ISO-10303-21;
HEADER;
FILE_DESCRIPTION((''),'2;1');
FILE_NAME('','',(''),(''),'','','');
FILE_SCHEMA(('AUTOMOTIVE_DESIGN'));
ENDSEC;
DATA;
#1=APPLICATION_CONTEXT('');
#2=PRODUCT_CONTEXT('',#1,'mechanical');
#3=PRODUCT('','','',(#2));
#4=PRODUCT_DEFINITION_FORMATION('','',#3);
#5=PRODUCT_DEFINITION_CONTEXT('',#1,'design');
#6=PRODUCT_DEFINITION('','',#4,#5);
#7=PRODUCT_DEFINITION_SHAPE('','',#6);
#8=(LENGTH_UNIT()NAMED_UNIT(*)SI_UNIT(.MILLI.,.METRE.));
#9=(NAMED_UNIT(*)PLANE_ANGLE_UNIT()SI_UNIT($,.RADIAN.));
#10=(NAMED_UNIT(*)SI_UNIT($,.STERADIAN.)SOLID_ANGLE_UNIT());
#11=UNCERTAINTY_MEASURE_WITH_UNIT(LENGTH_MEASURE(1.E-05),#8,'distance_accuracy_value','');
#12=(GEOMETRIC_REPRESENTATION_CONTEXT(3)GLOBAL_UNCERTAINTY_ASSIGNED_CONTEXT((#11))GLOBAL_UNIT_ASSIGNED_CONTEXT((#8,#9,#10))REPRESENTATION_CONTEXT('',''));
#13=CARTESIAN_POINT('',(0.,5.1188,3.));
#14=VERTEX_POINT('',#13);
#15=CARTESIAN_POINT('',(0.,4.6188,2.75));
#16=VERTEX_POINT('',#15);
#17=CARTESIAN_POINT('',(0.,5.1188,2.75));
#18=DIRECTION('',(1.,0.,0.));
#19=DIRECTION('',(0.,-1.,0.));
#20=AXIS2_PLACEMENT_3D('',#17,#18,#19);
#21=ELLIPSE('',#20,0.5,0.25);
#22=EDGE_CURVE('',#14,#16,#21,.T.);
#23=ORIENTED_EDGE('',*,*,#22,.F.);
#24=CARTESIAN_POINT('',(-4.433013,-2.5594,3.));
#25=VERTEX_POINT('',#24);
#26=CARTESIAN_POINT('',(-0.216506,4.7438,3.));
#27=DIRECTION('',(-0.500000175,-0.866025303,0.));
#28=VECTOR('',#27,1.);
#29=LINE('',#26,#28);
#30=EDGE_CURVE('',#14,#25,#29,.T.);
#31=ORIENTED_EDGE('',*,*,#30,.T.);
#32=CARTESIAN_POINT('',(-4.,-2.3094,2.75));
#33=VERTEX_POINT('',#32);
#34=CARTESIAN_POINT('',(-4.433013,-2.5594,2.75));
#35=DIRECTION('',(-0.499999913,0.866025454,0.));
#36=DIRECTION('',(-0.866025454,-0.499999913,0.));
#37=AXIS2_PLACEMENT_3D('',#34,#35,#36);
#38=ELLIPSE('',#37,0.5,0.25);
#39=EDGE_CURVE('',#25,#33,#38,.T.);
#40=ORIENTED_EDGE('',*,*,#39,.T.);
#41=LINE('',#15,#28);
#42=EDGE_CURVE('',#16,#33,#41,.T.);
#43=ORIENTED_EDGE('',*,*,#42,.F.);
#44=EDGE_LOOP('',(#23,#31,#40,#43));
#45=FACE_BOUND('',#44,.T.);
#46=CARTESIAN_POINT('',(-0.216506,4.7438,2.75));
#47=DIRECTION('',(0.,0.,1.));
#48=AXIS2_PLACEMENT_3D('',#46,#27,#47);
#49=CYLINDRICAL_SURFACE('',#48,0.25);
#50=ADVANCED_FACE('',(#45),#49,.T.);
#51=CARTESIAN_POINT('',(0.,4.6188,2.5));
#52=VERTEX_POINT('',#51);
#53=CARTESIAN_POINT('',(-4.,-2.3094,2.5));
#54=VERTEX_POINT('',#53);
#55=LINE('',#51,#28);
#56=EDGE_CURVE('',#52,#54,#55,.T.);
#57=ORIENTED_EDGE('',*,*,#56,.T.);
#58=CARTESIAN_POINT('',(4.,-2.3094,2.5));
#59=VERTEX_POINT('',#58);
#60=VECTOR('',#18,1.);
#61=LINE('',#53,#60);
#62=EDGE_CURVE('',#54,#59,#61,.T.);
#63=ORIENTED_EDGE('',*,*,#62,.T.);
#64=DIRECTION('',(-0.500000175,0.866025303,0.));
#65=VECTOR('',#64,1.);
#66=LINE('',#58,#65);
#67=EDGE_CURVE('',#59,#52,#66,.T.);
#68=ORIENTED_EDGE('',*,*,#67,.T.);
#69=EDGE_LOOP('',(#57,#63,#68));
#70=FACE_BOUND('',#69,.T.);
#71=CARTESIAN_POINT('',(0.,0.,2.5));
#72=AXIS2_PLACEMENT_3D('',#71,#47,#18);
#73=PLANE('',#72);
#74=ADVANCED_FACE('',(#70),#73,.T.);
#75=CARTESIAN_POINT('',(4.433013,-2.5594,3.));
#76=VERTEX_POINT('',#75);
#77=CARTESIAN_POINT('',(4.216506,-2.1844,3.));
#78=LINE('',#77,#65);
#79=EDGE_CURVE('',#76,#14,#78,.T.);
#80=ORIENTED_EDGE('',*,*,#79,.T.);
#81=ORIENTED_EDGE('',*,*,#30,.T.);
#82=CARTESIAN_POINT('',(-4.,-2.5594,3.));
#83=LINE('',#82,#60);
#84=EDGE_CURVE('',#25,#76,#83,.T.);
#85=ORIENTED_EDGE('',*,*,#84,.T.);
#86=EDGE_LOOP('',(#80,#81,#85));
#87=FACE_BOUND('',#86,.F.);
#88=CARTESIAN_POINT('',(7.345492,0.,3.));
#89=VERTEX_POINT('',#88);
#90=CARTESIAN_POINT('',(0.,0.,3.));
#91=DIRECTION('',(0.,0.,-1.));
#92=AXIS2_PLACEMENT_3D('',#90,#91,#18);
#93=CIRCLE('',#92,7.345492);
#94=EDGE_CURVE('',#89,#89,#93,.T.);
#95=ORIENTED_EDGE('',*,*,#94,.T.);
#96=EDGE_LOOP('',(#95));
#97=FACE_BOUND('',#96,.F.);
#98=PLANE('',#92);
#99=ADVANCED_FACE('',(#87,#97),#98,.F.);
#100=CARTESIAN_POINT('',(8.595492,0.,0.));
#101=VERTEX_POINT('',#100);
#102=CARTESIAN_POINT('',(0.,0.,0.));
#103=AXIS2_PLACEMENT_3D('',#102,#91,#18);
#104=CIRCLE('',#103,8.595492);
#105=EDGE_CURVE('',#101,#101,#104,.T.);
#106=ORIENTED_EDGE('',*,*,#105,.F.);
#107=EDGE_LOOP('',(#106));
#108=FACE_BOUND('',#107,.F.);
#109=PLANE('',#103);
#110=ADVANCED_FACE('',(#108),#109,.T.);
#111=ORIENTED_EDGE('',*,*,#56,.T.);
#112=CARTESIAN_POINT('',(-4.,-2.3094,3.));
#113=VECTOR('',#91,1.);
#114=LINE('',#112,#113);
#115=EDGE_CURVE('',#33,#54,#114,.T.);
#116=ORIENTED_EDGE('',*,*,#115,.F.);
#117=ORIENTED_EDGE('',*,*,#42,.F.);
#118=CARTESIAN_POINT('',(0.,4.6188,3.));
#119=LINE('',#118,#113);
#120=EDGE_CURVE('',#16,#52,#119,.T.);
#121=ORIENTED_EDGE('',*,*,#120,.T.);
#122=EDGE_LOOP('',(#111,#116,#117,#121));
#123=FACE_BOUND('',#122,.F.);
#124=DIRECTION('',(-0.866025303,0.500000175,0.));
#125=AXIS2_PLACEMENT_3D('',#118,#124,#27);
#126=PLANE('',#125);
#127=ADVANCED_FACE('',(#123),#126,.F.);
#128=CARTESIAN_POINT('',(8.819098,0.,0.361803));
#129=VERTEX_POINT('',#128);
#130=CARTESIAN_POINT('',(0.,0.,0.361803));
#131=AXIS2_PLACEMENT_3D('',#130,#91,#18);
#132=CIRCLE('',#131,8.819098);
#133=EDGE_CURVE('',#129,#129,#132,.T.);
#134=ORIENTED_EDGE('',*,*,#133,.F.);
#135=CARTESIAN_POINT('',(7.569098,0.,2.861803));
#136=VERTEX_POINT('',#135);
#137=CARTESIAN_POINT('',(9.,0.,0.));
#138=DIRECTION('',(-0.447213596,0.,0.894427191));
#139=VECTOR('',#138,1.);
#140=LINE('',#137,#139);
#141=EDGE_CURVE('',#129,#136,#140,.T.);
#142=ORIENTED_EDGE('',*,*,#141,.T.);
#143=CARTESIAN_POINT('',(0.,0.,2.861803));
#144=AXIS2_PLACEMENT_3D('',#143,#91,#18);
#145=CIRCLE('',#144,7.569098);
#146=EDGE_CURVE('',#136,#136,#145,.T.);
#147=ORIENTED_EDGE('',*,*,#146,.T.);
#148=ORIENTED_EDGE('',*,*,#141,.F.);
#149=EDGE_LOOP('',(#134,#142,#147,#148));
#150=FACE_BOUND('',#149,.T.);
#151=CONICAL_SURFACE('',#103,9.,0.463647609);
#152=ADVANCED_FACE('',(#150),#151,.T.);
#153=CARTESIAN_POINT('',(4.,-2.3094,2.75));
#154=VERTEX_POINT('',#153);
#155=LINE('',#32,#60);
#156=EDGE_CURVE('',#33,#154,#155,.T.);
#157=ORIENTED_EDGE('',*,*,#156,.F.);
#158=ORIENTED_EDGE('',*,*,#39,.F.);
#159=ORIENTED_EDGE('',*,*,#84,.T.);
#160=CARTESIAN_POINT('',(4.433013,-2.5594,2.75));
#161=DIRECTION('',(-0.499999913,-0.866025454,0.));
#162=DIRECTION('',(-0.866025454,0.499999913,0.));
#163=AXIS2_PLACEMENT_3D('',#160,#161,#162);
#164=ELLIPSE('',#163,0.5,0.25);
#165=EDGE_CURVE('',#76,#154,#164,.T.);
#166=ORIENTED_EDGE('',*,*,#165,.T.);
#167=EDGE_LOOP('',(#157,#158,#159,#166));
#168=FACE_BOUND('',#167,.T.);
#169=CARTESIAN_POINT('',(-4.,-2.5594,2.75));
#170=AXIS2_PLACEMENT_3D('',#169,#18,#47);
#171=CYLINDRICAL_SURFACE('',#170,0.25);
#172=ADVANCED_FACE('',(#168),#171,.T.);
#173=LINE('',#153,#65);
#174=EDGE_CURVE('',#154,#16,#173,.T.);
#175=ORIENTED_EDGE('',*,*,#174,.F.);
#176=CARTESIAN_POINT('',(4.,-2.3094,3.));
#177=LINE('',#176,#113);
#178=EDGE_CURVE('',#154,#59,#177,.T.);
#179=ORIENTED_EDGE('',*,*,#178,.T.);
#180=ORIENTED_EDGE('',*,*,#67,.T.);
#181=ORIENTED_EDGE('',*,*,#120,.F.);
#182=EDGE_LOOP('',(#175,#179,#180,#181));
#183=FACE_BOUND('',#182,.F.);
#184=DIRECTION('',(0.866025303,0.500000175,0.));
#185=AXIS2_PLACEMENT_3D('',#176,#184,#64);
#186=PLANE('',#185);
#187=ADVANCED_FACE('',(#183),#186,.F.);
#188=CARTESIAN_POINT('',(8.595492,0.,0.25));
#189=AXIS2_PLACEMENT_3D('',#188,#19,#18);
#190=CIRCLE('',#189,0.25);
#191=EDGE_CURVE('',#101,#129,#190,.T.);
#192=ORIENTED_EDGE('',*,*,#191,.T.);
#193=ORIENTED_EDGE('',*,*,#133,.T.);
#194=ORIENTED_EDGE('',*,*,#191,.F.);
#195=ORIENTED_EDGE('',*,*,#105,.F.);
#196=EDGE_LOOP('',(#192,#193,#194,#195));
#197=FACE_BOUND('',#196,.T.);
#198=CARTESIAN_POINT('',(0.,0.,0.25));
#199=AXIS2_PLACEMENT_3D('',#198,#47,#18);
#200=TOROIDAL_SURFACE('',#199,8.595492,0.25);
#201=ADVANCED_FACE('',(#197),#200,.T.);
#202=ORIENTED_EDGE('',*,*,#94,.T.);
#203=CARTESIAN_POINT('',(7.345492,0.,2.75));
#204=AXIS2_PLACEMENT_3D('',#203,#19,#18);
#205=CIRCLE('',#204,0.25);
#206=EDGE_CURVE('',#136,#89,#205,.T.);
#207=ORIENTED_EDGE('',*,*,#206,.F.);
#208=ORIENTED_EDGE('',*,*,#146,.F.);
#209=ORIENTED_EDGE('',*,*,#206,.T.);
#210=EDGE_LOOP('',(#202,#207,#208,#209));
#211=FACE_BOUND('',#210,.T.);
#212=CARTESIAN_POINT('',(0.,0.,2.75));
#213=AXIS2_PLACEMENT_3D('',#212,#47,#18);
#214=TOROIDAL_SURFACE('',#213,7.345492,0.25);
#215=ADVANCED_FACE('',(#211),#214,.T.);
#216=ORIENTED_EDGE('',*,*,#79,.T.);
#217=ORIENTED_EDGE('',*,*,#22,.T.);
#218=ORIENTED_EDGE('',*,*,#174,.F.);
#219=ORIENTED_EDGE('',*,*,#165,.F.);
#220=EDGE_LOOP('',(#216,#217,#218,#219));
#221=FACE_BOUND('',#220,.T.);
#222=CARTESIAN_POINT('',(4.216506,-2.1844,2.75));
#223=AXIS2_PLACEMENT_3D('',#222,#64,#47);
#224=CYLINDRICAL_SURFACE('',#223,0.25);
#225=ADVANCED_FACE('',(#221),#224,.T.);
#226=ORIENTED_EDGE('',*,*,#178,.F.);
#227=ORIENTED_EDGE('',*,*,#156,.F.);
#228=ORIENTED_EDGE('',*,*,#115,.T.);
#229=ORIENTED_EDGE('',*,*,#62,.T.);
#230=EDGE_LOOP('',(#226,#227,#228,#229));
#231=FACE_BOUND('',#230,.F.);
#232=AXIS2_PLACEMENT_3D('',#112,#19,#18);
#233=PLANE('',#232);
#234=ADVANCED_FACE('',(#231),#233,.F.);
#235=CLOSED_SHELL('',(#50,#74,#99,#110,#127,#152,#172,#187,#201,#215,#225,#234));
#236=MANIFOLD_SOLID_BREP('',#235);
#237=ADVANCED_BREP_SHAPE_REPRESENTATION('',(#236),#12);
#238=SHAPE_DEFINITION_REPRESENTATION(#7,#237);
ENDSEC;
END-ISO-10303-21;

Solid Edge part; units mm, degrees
sketch "Sketch1" plane through (0, 0, 0) normal (0, -1, 0) x (1, 0, 0)
  line L0 (0, 0) -> (9, 0)
  line L1 (9, 0) -> (7.5, 3)
  line L2 (7.5, 3) -> (0, 3)
  dimension "D1" = 9
  dimension "D2" = 3
  dimension "D3" = 7.5
revolve "RevolvedProtrusion1" add sketch "Sketch1" angle 360 about axis through (0, 0, 3) along (0, 0, -1)
sketch "Sketch2" plane through (0, 0, 3) normal (0, 0, 1) x (1, 0, 0)
  line L0 (0, 4.6188) -> (-4, -2.3094)
  line L1 (-4, -2.3094) -> (4, -2.3094)
  line L2 (4, -2.3094) -> (0, 4.6188)
  dimension "D1" = 8
extrude "triangle_cut" cut sketch "Sketch2" against normal blind 0.5
fillet "Round1" radius 0.25 5 edges at (-9, 0, 0) (-7.5, 0, 3) (-2, 1.1547, 3) (2, 1.1547, 3) (0, -2.3094, 3)
properties material "Polyethylene, low density"
